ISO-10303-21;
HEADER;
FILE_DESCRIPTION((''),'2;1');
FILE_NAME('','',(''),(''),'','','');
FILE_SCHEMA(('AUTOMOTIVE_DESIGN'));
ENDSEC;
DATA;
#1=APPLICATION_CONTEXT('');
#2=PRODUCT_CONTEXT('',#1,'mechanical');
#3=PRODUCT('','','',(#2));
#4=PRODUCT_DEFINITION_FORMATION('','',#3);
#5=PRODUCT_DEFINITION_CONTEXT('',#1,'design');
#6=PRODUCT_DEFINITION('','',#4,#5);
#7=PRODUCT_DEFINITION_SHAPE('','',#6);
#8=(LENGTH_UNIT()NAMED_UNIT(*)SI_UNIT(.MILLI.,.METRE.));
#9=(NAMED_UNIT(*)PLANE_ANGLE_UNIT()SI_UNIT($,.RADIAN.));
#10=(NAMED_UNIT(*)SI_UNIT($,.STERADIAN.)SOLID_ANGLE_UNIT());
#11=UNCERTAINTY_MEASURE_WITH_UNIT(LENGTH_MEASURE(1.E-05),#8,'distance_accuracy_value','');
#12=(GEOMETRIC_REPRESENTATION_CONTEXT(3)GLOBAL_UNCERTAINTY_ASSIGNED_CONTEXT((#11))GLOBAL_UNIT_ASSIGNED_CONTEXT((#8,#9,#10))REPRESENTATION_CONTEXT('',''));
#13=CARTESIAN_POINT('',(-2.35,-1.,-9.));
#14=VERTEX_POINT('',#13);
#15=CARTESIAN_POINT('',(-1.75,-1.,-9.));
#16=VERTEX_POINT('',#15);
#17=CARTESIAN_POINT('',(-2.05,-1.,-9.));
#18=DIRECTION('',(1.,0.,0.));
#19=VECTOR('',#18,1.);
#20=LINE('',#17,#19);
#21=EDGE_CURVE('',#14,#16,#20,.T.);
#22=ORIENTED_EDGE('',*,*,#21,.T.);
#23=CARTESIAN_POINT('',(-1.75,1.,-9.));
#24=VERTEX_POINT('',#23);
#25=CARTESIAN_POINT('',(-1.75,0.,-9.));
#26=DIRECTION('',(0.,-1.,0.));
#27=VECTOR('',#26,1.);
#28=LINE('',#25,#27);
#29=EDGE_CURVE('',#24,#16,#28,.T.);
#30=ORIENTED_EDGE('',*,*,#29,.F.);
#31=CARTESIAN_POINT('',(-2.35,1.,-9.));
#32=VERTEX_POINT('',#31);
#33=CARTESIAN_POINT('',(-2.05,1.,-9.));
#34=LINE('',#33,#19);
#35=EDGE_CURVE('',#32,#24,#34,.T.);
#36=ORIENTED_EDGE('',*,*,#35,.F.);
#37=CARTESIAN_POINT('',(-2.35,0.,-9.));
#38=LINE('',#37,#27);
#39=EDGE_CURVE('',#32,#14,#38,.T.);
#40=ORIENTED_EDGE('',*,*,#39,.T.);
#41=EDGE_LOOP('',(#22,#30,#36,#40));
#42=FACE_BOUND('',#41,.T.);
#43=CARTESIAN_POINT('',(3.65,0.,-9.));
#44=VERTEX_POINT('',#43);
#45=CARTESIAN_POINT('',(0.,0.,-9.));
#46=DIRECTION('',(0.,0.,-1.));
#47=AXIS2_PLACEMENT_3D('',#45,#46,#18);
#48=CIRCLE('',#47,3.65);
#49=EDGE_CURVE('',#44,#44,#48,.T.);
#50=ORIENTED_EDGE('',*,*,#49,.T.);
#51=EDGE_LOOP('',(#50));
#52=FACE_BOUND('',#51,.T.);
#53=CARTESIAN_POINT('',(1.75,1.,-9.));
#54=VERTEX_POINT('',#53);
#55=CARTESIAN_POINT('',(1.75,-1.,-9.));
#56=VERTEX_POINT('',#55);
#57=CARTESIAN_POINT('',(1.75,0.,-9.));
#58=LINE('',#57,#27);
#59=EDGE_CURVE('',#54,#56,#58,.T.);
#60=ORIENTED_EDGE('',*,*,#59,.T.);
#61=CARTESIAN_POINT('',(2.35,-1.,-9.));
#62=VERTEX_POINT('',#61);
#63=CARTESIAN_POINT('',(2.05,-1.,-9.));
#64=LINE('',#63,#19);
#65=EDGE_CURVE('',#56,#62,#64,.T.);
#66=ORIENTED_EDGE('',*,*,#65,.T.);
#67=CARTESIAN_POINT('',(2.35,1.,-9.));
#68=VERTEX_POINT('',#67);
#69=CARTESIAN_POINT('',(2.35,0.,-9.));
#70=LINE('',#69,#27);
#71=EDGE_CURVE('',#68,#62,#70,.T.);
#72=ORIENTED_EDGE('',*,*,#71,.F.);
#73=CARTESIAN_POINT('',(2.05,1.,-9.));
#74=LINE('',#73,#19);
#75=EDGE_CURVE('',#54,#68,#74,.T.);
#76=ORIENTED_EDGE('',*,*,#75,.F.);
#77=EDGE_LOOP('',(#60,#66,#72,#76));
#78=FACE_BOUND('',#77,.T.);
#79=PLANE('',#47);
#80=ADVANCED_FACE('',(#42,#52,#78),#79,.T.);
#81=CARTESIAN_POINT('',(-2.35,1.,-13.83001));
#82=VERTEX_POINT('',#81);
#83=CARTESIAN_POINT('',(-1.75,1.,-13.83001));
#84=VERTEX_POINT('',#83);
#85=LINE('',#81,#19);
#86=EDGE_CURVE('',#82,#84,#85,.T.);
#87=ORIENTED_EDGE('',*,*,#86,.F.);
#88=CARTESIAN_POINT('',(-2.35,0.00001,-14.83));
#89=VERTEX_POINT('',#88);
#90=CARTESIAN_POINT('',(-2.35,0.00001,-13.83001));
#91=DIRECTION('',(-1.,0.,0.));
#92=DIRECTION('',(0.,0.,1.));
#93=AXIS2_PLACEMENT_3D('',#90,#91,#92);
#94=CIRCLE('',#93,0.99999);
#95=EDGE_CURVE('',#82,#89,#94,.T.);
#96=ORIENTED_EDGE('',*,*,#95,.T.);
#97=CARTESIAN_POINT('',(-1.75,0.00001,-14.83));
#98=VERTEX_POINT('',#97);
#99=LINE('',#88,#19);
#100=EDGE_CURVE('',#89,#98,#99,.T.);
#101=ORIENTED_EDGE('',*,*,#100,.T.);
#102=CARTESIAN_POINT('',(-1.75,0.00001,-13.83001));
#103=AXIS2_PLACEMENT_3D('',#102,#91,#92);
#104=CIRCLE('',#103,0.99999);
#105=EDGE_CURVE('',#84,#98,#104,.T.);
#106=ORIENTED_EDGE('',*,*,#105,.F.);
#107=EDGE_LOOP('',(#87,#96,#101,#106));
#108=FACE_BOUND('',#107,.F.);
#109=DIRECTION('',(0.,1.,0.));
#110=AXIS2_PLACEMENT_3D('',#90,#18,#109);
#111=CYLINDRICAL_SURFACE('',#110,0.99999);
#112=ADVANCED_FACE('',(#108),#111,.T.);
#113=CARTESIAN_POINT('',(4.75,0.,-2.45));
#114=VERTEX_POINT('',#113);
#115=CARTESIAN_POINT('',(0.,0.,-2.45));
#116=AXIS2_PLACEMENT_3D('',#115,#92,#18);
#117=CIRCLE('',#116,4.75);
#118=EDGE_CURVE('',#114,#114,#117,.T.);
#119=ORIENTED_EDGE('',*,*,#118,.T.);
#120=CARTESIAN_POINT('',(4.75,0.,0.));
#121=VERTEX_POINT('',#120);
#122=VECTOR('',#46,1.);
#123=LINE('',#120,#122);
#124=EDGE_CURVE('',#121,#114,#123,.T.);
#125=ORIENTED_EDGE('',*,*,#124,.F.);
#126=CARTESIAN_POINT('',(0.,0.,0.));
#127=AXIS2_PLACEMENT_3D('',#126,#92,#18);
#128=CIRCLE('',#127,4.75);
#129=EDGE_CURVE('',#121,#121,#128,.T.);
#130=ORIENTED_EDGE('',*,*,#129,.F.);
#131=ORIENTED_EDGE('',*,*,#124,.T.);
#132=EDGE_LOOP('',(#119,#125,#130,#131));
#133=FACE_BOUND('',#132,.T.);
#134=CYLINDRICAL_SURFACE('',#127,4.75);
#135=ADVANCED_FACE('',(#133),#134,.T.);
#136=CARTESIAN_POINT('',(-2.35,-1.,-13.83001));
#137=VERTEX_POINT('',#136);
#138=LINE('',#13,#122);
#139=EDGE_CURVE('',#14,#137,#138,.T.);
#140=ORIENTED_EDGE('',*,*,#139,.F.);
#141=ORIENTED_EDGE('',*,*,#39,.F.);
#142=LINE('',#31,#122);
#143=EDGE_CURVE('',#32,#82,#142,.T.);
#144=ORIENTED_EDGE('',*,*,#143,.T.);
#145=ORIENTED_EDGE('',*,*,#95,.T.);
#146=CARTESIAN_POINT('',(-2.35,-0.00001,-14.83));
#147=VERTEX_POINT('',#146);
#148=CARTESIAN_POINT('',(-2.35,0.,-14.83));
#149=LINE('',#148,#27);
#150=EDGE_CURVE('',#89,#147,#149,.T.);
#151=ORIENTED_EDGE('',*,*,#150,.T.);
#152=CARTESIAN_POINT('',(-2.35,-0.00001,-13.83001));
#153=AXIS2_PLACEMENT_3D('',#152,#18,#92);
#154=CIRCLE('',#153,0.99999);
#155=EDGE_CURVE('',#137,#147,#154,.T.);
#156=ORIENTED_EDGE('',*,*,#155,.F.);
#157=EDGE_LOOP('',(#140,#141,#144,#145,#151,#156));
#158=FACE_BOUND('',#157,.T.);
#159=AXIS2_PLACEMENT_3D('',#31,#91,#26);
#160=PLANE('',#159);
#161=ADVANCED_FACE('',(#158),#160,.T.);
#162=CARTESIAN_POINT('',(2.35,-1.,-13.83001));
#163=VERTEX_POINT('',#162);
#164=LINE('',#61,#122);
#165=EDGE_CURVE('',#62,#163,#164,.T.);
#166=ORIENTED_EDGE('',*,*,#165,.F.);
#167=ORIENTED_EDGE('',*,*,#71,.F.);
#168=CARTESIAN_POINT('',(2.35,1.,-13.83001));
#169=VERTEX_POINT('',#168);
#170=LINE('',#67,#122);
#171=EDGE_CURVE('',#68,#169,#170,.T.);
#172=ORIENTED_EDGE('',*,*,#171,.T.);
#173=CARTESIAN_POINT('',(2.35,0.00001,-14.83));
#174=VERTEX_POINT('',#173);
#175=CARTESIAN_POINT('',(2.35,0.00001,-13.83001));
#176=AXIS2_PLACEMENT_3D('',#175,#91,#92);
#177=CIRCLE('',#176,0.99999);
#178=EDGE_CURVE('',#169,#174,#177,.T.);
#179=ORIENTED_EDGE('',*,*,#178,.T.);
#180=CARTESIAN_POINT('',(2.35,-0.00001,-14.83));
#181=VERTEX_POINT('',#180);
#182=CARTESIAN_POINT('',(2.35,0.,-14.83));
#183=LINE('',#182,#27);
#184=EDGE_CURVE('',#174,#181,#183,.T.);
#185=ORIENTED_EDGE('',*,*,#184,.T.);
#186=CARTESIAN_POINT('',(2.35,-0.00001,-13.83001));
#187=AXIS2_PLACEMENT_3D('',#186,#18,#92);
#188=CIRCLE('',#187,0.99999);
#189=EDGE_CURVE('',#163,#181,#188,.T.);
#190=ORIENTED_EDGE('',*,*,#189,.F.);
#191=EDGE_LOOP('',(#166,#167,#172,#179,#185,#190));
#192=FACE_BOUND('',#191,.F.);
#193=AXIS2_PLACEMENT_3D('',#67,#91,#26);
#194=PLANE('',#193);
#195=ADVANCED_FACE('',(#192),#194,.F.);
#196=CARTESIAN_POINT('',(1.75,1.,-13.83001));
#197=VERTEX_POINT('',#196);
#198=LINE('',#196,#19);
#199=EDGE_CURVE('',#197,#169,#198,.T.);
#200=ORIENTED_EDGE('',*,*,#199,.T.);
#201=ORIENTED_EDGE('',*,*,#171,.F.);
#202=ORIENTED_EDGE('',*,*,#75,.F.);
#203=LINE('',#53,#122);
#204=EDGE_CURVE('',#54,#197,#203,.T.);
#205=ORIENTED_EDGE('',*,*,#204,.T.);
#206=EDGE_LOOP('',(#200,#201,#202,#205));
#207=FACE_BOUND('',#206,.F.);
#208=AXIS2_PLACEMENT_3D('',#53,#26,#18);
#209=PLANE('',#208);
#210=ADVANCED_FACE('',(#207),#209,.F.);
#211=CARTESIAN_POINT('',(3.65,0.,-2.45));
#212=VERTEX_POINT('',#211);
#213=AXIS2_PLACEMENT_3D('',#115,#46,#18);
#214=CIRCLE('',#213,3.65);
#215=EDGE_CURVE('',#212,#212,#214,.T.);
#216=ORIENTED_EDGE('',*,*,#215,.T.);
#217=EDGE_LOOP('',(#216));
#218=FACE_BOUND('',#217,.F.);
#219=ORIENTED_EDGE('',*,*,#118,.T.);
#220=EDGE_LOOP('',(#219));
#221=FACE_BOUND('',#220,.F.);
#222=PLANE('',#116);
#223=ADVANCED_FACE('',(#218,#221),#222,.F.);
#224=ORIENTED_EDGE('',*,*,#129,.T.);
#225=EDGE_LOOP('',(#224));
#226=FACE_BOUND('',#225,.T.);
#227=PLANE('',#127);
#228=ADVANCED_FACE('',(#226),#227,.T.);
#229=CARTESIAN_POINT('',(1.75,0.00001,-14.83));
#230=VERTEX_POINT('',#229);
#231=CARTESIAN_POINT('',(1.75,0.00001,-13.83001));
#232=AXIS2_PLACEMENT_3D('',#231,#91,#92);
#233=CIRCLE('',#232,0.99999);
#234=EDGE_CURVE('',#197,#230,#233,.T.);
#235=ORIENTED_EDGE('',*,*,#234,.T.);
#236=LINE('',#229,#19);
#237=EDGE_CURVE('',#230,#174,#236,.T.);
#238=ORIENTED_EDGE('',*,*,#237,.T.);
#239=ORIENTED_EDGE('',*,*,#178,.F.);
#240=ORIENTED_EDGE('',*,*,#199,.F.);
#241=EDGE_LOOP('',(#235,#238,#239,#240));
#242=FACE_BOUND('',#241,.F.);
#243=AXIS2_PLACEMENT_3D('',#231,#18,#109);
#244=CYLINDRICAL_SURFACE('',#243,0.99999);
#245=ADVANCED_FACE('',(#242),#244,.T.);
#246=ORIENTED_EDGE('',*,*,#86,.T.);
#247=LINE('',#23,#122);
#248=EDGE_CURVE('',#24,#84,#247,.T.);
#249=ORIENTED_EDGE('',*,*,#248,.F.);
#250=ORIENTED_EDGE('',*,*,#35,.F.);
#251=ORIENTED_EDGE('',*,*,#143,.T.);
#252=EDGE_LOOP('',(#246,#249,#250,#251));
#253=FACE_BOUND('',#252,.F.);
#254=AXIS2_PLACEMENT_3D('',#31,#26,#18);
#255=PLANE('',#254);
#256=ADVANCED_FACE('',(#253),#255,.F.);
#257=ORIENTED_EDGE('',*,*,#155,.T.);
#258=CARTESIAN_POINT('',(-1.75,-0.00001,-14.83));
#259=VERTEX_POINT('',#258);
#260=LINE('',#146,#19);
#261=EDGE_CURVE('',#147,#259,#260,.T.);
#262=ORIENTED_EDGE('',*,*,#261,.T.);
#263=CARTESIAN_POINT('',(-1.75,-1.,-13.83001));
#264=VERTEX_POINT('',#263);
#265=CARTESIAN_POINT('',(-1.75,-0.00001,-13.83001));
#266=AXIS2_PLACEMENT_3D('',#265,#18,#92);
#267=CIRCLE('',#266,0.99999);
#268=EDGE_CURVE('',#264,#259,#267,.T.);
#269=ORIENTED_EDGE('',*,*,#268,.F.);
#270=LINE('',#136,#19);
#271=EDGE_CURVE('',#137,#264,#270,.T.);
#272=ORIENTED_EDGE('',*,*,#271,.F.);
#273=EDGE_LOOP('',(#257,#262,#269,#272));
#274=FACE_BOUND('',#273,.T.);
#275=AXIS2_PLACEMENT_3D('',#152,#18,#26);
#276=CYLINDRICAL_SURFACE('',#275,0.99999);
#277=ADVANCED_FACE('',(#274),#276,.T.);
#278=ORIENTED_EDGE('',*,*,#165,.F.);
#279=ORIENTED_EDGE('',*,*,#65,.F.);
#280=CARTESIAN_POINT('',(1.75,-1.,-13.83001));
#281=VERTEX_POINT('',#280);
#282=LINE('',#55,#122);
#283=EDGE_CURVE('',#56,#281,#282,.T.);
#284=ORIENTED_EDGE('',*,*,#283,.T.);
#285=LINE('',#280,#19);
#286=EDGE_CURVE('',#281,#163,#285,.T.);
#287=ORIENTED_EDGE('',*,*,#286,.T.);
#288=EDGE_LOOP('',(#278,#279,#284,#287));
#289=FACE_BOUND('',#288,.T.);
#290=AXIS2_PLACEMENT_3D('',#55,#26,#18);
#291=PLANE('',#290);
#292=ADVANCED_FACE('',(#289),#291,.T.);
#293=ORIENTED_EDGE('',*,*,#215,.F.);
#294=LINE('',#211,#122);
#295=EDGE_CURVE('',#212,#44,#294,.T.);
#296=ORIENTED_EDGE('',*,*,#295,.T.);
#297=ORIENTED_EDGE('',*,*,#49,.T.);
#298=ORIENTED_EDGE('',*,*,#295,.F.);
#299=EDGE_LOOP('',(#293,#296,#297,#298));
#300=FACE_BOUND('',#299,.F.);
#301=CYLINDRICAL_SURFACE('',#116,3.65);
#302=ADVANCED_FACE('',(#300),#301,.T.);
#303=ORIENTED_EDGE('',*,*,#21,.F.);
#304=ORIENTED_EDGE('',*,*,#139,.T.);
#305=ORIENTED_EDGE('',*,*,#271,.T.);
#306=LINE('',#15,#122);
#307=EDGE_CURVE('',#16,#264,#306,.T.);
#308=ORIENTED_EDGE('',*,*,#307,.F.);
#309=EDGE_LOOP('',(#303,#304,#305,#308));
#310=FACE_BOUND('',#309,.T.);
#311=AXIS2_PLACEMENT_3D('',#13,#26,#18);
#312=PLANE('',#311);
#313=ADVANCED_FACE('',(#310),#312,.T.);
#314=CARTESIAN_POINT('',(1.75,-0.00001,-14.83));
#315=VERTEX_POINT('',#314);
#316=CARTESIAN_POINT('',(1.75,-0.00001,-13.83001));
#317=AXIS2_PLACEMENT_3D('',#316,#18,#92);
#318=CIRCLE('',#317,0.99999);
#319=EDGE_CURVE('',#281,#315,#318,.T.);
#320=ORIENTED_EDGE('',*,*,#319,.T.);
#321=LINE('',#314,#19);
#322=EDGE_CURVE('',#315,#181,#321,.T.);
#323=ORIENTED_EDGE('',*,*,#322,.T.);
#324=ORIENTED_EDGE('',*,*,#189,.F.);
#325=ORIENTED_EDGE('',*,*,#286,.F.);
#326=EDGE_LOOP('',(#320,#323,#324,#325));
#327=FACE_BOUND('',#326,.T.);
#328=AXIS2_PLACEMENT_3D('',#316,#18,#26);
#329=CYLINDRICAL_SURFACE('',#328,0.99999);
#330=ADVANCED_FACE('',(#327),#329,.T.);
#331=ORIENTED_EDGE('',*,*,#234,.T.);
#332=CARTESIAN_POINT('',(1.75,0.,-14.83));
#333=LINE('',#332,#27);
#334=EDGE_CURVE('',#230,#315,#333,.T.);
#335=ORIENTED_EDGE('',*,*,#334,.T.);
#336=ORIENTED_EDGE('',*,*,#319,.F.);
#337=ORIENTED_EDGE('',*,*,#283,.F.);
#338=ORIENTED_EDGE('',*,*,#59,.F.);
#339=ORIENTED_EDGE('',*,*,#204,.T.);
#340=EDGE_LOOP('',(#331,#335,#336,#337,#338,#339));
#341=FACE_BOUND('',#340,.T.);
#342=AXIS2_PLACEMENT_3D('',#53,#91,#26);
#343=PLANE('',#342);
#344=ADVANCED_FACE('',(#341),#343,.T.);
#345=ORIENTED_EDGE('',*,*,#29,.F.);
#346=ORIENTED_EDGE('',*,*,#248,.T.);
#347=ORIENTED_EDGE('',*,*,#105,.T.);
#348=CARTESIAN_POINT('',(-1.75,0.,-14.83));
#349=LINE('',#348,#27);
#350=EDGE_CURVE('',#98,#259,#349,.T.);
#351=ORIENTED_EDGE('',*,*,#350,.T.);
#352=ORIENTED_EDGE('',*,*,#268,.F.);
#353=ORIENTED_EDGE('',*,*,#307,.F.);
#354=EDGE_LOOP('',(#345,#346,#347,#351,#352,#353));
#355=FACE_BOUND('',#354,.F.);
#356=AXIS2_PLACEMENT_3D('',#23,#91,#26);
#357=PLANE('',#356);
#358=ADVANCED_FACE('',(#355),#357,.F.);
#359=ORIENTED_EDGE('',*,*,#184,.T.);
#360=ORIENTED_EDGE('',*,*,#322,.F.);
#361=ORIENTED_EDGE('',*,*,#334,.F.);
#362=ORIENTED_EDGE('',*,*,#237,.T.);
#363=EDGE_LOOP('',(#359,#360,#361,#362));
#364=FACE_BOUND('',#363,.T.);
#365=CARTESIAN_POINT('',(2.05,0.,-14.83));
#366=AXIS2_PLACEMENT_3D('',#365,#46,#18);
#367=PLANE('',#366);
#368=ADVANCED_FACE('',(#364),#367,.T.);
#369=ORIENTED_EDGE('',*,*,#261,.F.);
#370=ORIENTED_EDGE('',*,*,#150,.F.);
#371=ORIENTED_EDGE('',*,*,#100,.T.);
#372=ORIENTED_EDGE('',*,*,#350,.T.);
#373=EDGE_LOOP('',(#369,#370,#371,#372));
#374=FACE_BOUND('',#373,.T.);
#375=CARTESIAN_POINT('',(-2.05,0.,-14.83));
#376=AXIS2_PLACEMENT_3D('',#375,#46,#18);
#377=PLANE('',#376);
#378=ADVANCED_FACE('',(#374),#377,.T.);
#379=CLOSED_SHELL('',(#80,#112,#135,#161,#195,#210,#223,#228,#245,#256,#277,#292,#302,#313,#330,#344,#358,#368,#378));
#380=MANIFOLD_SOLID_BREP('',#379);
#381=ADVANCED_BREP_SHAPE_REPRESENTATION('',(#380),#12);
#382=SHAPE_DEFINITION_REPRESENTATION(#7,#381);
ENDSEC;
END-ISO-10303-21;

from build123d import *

# Parameters (mm, degrees)
F0_R     = 4.75
F1_DEPTH = 2.45
F2_R     = 3.65
F3_DEPTH = 6.55
F4_W     = 0.6
F4_H     = 2
F5_DEPTH = 5.83
F6_R     = 0.99999


# Not quite as in the source:
# - a fillet or chamfer is up to 0.001 mm smaller than in the source, because OpenCascade refuses the exact size


with BuildPart() as f1:
    # F0 (on Top) → F1 (new body)
    with BuildSketch(Plane.XY):
        Circle(F0_R)
    extrude(amount=-F1_DEPTH)

    # F2 (on face) → F3 (join)
    with BuildSketch(Plane(origin=(0, 0, -2.45), x_dir=(1, 0, 0), z_dir=(0, 0, -1))):
        Circle(F2_R)
    extrude(amount=F3_DEPTH)

    # F4 (on face) → F5 (join)
    with BuildSketch(Plane(origin=(0, 0, -9), x_dir=(1, 0, 0), z_dir=(0, 0, -1))):
        with Locations((-2.05, 0)):
            Rectangle(F4_W, F4_H)
        with Locations((2.05, 0)):
            Rectangle(F4_W, F4_H)
    extrude(amount=F5_DEPTH)

    # F6 (radius 1 in the source; OpenCascade refuses exactly that, so slightly less here)
    f6_edges = [f1.edges().sort_by_distance(p)[0] for p in [
        (-2.05, -1, -14.83),
        (2.05, -1, -14.83),
        (2.05, 1, -14.83),
        (-2.05, 1, -14.83),
    ]]
    fillet(f6_edges, radius=F6_R)


solid = f1.part
